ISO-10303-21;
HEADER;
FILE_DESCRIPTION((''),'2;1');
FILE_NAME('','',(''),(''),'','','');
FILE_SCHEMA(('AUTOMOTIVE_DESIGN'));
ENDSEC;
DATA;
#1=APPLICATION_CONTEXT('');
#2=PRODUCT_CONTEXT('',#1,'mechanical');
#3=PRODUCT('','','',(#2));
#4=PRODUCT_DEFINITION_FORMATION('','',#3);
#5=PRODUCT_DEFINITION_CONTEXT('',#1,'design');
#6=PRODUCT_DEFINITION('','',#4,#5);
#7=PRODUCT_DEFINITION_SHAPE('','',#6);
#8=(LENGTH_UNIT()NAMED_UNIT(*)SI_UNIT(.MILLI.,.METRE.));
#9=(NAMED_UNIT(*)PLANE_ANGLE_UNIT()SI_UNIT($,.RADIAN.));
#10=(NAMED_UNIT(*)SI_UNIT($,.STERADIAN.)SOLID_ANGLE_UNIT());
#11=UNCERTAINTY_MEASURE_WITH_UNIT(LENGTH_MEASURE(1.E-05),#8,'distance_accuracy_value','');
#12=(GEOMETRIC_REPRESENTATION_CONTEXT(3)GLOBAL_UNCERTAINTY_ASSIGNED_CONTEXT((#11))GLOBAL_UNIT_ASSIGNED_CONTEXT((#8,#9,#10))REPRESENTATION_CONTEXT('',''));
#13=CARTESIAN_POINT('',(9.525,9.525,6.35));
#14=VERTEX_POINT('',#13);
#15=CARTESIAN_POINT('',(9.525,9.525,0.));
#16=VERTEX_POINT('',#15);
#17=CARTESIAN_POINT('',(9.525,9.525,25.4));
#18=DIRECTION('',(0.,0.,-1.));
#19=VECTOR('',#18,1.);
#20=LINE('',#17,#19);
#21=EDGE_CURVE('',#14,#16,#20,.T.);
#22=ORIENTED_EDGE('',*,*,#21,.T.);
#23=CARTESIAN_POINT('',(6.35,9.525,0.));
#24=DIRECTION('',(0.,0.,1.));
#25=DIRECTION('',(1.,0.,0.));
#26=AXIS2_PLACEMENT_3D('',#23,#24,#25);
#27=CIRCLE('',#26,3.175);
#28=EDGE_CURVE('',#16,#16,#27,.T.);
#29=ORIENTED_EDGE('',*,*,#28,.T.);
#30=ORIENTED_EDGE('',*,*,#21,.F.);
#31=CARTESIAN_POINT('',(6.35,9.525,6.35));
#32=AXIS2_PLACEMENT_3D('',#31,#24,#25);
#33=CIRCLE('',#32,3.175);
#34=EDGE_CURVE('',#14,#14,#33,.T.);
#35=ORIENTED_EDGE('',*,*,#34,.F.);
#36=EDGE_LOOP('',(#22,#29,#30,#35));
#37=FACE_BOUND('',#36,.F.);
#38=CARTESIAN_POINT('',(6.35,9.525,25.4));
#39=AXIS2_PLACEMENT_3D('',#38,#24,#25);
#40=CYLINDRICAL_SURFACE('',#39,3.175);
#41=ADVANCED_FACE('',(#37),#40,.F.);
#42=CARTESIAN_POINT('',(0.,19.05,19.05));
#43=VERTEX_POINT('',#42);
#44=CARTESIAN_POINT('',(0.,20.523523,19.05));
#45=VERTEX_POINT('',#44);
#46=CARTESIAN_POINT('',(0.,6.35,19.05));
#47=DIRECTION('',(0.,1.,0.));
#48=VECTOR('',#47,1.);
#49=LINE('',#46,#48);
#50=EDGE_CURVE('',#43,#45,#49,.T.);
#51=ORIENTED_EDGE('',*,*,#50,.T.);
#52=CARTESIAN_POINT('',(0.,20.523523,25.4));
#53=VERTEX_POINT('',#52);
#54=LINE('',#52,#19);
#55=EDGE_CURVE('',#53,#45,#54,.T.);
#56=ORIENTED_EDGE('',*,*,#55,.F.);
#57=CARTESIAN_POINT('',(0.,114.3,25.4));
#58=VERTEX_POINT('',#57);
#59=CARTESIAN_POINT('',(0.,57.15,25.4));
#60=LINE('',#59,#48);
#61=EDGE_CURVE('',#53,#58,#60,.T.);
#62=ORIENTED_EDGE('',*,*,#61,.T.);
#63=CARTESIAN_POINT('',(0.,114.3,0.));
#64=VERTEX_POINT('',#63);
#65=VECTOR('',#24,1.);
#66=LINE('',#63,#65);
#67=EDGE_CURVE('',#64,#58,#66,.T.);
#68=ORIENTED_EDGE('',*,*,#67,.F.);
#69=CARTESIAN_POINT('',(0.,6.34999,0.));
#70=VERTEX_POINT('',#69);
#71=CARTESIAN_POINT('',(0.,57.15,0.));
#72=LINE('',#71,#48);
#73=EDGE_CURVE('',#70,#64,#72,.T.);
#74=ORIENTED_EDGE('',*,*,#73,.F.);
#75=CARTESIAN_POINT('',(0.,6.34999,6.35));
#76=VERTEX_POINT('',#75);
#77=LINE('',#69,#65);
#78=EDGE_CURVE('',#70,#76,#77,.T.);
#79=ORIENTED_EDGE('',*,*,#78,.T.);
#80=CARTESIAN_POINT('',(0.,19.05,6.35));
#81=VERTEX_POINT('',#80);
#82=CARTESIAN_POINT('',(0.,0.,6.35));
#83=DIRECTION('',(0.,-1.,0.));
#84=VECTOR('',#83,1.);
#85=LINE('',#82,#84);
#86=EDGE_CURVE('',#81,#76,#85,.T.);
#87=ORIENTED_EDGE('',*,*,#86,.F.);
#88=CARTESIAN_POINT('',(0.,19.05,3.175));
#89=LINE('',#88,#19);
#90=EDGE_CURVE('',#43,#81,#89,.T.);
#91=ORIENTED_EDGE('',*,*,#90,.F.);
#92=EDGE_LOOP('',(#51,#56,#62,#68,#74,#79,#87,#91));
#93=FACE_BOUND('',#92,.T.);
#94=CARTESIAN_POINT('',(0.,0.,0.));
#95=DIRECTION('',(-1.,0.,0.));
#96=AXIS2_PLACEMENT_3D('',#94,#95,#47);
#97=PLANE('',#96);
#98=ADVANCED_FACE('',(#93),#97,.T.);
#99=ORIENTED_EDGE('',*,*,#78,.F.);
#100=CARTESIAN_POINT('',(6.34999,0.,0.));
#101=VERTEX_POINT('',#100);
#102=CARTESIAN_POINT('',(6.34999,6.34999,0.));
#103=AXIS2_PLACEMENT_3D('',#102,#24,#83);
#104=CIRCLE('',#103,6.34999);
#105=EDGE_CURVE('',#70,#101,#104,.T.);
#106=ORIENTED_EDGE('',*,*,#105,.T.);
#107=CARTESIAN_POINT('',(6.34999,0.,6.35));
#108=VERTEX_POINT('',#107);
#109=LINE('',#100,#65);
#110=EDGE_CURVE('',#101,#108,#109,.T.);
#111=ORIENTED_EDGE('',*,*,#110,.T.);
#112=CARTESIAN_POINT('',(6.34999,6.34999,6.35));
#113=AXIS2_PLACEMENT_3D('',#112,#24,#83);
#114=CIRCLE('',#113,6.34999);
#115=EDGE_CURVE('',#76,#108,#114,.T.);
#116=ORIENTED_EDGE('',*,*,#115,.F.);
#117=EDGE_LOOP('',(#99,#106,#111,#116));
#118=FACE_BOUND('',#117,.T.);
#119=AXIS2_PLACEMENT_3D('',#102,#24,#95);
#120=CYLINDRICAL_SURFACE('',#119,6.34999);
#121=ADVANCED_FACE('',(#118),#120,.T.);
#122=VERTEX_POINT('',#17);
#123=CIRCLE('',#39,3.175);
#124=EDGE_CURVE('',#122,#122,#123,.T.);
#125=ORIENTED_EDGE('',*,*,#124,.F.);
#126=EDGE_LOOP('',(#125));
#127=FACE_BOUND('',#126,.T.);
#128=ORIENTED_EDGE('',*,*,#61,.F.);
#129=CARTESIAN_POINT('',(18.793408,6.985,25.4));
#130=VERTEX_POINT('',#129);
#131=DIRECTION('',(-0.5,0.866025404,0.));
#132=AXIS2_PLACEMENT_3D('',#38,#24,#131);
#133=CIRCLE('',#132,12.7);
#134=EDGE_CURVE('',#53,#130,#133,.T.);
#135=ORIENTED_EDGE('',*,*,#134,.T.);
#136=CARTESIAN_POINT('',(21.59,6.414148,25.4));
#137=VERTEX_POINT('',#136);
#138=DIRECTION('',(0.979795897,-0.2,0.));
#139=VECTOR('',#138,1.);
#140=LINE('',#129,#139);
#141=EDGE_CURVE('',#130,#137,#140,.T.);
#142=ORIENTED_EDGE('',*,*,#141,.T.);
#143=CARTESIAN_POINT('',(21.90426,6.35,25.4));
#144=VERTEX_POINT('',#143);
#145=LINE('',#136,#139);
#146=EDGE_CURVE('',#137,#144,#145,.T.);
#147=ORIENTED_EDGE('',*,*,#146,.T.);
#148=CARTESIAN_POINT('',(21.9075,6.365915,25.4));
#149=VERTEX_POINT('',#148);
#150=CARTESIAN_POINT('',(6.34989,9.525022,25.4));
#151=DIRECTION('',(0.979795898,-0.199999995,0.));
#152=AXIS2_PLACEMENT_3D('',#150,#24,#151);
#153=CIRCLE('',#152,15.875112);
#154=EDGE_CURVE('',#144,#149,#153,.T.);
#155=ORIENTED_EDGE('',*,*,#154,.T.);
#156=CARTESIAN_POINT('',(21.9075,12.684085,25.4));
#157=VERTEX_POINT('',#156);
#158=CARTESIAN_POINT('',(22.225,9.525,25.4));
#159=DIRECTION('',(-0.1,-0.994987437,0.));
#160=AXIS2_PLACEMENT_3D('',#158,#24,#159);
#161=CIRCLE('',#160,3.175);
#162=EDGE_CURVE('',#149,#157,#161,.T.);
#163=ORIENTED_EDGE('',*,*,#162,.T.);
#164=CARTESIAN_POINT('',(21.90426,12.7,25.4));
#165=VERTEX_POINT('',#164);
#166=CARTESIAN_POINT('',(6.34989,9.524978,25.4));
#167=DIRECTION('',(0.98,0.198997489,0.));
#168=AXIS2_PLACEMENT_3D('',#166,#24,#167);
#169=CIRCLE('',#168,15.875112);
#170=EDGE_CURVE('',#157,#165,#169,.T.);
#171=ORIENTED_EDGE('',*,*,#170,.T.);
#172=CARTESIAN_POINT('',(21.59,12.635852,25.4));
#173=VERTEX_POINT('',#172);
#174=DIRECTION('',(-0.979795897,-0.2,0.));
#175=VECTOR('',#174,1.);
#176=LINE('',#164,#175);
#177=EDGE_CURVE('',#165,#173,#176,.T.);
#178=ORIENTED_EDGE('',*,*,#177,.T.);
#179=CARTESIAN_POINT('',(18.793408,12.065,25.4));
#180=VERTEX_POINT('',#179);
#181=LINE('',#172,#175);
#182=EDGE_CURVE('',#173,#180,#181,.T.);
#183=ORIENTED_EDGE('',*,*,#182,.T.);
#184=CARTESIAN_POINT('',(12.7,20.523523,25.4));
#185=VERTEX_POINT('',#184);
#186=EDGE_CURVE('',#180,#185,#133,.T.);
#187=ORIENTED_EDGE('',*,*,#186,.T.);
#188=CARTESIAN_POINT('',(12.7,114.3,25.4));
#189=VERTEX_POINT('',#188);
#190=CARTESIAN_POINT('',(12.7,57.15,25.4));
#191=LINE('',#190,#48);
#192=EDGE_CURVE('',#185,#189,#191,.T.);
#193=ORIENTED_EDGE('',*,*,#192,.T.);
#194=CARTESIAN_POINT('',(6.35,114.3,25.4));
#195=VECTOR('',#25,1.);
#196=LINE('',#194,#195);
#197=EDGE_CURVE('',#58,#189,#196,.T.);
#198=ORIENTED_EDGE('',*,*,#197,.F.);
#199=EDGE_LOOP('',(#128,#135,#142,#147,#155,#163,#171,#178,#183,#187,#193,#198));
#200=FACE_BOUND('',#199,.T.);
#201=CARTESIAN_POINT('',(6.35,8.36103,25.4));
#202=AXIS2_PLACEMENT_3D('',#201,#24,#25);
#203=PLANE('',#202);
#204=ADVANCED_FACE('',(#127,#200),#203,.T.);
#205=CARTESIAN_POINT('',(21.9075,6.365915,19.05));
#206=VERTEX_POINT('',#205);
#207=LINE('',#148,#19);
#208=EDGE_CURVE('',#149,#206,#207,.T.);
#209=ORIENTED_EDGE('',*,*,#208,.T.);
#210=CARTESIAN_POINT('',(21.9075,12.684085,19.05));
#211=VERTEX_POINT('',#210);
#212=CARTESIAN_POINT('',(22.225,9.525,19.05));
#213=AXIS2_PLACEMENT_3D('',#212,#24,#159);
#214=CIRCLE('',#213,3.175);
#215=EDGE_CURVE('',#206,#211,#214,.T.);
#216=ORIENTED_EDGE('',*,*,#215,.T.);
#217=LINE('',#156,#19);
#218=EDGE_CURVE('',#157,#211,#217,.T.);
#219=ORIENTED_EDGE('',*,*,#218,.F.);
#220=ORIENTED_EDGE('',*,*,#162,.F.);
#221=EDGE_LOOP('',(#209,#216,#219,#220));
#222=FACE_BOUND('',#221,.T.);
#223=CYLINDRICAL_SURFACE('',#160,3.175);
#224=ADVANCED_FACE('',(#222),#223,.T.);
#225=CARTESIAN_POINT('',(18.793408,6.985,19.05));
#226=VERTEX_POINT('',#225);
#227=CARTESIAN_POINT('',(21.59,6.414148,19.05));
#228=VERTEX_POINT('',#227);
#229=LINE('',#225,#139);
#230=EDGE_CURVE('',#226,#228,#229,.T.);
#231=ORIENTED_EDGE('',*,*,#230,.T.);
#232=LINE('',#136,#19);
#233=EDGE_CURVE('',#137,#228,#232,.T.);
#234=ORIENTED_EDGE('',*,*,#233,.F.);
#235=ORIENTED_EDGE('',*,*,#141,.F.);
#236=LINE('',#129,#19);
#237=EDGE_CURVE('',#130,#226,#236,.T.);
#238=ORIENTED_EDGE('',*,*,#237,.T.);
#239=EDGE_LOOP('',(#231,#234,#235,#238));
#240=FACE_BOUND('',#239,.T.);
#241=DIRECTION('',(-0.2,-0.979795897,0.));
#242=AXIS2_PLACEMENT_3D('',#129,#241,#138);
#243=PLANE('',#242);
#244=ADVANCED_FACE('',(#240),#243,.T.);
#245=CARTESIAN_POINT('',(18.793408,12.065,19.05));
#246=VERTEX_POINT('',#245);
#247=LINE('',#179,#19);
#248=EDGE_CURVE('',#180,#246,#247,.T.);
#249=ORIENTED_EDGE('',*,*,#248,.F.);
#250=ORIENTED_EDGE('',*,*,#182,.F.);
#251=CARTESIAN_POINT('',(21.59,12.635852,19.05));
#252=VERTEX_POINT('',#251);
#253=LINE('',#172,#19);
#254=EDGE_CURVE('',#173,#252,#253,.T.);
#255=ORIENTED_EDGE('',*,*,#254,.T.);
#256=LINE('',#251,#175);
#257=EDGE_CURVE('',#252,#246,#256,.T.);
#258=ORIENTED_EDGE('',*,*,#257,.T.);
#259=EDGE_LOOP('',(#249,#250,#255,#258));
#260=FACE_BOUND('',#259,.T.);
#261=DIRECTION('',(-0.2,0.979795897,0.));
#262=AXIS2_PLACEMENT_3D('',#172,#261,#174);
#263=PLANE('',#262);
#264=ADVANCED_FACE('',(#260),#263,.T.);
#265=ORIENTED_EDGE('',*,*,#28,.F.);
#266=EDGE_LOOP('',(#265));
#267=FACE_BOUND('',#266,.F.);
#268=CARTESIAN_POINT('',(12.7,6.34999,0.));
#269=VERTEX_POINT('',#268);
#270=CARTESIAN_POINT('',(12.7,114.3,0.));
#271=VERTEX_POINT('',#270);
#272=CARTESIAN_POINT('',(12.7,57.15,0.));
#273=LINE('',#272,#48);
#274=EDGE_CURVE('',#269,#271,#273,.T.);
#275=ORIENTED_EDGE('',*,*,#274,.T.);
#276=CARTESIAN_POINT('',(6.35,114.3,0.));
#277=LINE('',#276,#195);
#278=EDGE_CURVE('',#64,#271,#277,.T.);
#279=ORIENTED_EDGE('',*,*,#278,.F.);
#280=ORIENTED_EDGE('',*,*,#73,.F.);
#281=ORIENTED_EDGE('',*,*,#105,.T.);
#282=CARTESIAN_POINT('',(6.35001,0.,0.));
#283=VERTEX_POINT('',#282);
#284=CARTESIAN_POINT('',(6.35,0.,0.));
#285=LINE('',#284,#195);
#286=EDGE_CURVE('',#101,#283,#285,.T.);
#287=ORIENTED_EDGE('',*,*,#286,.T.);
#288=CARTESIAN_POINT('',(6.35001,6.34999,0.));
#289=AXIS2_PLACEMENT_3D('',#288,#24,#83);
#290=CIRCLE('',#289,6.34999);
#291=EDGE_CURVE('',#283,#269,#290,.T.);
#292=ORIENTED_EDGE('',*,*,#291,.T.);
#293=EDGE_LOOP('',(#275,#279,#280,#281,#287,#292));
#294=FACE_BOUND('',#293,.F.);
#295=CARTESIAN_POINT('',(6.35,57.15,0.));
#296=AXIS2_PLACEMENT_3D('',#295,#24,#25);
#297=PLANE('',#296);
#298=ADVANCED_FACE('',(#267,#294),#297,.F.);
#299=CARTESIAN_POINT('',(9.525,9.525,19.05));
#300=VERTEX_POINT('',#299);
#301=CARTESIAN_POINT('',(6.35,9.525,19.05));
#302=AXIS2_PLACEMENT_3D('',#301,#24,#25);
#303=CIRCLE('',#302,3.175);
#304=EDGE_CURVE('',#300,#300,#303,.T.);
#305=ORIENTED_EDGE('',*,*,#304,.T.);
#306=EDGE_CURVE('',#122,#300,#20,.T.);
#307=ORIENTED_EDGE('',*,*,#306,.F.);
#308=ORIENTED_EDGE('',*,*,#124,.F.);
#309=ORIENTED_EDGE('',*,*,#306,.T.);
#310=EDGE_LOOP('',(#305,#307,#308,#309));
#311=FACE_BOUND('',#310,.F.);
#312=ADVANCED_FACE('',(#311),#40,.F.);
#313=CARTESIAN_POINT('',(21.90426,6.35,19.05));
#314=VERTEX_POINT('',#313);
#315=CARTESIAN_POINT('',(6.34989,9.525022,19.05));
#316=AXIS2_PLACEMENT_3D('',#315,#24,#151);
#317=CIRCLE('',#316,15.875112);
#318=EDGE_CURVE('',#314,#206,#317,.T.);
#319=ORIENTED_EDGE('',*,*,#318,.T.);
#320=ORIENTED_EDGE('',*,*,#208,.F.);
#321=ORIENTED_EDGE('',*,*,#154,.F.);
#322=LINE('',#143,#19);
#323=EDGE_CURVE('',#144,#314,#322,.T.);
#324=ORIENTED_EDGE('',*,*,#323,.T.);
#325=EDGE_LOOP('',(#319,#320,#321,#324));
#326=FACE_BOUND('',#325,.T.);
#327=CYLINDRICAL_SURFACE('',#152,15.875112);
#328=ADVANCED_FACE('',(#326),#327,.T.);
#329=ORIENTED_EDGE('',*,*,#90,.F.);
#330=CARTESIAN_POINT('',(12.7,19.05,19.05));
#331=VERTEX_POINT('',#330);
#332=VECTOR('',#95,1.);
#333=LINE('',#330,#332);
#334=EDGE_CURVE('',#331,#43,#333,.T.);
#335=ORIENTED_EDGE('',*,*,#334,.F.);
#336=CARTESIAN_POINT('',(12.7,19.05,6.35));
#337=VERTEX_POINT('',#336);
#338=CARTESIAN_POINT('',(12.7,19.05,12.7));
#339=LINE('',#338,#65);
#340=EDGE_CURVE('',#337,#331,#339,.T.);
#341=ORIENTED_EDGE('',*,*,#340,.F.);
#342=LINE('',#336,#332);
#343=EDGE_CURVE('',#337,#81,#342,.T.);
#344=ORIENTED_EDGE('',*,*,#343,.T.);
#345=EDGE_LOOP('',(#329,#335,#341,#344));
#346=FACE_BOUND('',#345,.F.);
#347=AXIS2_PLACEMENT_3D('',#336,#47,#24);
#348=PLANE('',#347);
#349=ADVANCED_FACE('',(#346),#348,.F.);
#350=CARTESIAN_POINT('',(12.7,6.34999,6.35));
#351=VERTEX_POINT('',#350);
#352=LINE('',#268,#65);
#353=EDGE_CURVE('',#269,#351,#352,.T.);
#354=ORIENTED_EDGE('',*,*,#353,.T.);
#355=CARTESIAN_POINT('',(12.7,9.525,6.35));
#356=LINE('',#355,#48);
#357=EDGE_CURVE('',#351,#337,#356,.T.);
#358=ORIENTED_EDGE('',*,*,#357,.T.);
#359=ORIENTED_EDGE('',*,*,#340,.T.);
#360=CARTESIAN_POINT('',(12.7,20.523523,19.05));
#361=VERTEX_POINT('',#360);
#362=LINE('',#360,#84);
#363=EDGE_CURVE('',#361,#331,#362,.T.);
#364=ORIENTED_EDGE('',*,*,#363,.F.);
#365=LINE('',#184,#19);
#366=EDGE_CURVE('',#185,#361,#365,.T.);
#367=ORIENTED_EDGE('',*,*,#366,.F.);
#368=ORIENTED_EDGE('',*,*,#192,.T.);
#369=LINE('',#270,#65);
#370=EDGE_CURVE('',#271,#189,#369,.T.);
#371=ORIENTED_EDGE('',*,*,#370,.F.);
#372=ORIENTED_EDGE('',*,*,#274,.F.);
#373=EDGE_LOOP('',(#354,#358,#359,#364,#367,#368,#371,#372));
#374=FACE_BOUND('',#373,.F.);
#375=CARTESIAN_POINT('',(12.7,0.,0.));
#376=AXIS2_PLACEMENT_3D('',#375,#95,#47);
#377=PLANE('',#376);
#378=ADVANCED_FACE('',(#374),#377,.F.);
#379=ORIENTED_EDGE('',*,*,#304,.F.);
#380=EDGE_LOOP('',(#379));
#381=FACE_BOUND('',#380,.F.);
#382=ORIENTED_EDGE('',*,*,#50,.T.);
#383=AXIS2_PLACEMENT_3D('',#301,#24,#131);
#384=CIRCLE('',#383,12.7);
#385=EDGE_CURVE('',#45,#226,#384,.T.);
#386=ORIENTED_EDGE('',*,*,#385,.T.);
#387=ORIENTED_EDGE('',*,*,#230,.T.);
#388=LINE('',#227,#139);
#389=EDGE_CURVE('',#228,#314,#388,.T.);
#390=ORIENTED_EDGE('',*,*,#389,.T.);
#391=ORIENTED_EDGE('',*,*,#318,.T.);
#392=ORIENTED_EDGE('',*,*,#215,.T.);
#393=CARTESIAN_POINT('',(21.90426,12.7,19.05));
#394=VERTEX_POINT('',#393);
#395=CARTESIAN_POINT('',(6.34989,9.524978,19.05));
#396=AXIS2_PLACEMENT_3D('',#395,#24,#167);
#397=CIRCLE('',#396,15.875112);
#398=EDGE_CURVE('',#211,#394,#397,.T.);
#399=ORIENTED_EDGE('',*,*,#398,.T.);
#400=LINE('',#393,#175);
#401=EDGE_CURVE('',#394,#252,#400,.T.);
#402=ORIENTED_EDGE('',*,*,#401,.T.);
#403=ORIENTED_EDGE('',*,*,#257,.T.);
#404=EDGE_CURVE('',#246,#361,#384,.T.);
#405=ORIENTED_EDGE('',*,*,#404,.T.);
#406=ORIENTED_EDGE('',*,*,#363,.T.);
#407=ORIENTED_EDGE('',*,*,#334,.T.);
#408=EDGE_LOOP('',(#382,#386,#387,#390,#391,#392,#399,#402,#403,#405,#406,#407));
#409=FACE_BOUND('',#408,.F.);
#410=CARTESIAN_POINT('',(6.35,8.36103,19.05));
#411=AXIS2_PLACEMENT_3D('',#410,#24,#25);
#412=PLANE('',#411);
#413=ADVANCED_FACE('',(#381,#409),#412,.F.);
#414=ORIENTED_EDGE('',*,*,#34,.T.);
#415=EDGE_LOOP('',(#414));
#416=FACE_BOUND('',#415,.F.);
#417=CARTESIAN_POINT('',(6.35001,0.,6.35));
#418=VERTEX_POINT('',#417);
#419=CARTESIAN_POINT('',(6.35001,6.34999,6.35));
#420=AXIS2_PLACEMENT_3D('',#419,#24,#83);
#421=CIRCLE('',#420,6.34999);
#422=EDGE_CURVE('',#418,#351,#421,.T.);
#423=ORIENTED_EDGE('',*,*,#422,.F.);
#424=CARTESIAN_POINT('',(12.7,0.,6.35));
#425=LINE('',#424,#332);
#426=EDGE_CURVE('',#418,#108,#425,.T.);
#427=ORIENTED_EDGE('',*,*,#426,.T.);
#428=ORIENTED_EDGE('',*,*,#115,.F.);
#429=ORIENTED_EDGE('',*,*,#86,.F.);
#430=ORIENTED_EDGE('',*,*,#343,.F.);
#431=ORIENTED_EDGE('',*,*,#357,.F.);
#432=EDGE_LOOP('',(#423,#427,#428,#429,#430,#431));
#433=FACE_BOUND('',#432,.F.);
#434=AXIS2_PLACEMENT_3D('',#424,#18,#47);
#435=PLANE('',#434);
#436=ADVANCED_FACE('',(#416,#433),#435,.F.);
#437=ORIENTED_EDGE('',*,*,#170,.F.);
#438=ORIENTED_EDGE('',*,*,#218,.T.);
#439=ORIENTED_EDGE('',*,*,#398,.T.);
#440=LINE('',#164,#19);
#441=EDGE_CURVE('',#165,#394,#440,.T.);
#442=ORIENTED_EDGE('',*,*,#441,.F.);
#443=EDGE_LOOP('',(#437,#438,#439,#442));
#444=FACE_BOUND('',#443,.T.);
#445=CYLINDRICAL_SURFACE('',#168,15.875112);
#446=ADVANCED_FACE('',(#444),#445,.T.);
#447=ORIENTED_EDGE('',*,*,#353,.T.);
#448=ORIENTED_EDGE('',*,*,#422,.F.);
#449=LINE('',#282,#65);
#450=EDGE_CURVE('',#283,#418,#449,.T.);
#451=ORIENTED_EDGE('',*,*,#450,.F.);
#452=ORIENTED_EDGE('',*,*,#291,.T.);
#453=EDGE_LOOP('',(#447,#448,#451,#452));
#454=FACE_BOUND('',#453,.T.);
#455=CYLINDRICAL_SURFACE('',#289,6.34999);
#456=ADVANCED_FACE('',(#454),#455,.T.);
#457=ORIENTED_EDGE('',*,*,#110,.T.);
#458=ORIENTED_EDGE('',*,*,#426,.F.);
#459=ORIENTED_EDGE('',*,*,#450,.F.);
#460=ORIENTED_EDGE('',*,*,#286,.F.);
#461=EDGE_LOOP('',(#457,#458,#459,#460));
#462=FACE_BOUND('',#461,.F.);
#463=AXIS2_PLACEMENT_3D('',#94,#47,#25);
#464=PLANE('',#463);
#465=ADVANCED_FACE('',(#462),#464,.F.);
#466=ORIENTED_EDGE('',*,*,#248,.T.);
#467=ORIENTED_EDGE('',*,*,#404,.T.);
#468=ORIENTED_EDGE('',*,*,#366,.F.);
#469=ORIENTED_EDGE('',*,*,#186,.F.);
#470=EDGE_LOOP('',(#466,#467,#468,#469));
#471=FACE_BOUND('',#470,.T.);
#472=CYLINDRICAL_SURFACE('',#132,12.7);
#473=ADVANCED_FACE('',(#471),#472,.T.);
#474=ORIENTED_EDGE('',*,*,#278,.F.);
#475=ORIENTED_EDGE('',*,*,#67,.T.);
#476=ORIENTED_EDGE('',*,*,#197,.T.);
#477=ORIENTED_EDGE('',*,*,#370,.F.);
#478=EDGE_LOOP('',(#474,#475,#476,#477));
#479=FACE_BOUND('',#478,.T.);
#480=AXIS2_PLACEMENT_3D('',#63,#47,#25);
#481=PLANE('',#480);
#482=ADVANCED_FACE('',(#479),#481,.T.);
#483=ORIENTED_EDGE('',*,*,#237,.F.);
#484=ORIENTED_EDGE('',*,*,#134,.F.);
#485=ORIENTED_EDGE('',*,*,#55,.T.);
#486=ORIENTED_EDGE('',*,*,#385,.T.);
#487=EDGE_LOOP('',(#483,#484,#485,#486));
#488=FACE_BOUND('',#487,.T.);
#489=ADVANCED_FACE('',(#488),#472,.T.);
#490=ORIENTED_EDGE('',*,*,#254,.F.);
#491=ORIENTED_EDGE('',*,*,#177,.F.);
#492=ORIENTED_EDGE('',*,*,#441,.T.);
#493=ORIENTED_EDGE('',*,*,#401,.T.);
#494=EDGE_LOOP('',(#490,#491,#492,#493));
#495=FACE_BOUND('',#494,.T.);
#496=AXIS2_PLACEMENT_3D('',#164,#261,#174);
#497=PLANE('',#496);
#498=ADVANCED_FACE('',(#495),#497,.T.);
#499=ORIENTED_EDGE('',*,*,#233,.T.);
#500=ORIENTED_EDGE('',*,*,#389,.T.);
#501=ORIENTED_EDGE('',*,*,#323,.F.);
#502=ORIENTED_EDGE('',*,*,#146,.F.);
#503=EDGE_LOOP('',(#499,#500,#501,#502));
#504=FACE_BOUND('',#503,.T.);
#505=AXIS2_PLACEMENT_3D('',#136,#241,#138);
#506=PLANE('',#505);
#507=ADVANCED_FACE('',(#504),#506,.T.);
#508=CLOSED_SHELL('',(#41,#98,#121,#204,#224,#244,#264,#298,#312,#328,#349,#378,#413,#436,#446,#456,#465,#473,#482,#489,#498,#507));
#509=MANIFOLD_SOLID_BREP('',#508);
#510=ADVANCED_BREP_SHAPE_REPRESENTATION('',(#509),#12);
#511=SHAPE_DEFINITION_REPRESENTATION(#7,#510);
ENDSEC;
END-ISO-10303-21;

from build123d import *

# Parameters (mm, degrees)
F0_W      = 12.7
F0_H      = 114.3
F1_DEPTH  = 25.4
F2_W      = 19.05
F2_H      = 12.7
F3_DEPTH  = 12.701
F4_R      = 6.34999
F5_R      = 3.175
F6_DEPTH  = 25.401
F8_DEPTH  = 6.35
F10_DEPTH = 6.35


# Not quite as in the source:
# - a fillet or chamfer is up to 0.001 mm smaller than in the source, because OpenCascade refuses the exact size


with BuildPart() as f1:
    # F0 (on Top) → F1 (new body)
    with BuildSketch(Plane.XY):
        with Locations((6.35, 57.15)):
            Rectangle(F0_W, F0_H)
    extrude(amount=F1_DEPTH)

    # F2 (on face) → F3 (cut, through all)
    with BuildSketch(Plane.YZ.offset(12.7)):
        with Locations((9.525, 12.7)):
            Rectangle(F2_W, F2_H)
    extrude(amount=-F3_DEPTH, mode=Mode.SUBTRACT)

    # F4 (radius 6.35 in the source; OpenCascade refuses exactly that, so slightly less here)
    f4_edges = [f1.edges().sort_by_distance(p)[0] for p in [
        (12.7, 0, 22.225),
        (12.7, 0, 3.175),
        (0, 0, 3.175),
        (0, 0, 22.225),
    ]]
    fillet(f4_edges, radius=F4_R)

    # F5 (on face) → F6 (cut, through all)
    with BuildSketch(Plane.XY.offset(25.4)):
        with Locations((6.35, 9.525)):
            Circle(F5_R)
    extrude(amount=-F6_DEPTH, mode=Mode.SUBTRACT)

    # F7 (on face) → F8 (join, through all)
    with BuildSketch(Plane.XY.offset(25.4)):
        with BuildLine():
            Line((0, 6.35), (0, 20.5235226281))
            ThreePointArc((0, 20.5235226281), (6.35, -3.175), (12.7, 20.5235226281))
            Line((12.7, 20.5235226281), (12.7, 6.35))
            ThreePointArc((12.7, 6.35), (6.35, 0), (0, 6.35))
        make_face()
    extrude(amount=-F8_DEPTH)

    # F9 (on face) → F10 (join, through all)
    with BuildSketch(Plane.XY.offset(25.4)):
        with BuildLine():
            ThreePointArc((21.59, 12.6358519733), (21.7481397779, 12.663985398), (21.9075, 12.6840851128))
            ThreePointArc((21.9075, 12.6840851128), (21.9058819686, 12.6920429708), (21.9042598667, 12.7))
            Line((21.9042598667, 12.7), (21.59, 12.6358519733))
        make_face()
        with BuildLine():
            ThreePointArc((21.9075, 6.3659148872), (25.4, 9.525), (21.9075, 12.6840851128))
            ThreePointArc((21.9075, 12.6840851128), (21.7481397779, 12.663985398), (21.59, 12.6358519733))
            Line((21.59, 12.6358519733), (18.7934078933, 12.065))
            ThreePointArc((18.7934078933, 12.065), (19.05, 9.525), (18.7934078933, 6.985))
            Line((18.7934078933, 6.985), (21.59, 6.4141480267))
            ThreePointArc((21.59, 6.4141480267), (21.7481397779, 6.386014602), (21.9075, 6.3659148872))
        make_face()
        with BuildLine():
            ThreePointArc((21.9042598667, 6.35), (21.9058819686, 6.3579570292), (21.9075, 6.3659148872))
            ThreePointArc((21.9075, 6.3659148872), (21.7481397779, 6.386014602), (21.59, 6.4141480267))
            Line((21.59, 6.4141480267), (21.9042598667, 6.35))
        make_face()
    extrude(amount=-F10_DEPTH)


solid = f1.part
